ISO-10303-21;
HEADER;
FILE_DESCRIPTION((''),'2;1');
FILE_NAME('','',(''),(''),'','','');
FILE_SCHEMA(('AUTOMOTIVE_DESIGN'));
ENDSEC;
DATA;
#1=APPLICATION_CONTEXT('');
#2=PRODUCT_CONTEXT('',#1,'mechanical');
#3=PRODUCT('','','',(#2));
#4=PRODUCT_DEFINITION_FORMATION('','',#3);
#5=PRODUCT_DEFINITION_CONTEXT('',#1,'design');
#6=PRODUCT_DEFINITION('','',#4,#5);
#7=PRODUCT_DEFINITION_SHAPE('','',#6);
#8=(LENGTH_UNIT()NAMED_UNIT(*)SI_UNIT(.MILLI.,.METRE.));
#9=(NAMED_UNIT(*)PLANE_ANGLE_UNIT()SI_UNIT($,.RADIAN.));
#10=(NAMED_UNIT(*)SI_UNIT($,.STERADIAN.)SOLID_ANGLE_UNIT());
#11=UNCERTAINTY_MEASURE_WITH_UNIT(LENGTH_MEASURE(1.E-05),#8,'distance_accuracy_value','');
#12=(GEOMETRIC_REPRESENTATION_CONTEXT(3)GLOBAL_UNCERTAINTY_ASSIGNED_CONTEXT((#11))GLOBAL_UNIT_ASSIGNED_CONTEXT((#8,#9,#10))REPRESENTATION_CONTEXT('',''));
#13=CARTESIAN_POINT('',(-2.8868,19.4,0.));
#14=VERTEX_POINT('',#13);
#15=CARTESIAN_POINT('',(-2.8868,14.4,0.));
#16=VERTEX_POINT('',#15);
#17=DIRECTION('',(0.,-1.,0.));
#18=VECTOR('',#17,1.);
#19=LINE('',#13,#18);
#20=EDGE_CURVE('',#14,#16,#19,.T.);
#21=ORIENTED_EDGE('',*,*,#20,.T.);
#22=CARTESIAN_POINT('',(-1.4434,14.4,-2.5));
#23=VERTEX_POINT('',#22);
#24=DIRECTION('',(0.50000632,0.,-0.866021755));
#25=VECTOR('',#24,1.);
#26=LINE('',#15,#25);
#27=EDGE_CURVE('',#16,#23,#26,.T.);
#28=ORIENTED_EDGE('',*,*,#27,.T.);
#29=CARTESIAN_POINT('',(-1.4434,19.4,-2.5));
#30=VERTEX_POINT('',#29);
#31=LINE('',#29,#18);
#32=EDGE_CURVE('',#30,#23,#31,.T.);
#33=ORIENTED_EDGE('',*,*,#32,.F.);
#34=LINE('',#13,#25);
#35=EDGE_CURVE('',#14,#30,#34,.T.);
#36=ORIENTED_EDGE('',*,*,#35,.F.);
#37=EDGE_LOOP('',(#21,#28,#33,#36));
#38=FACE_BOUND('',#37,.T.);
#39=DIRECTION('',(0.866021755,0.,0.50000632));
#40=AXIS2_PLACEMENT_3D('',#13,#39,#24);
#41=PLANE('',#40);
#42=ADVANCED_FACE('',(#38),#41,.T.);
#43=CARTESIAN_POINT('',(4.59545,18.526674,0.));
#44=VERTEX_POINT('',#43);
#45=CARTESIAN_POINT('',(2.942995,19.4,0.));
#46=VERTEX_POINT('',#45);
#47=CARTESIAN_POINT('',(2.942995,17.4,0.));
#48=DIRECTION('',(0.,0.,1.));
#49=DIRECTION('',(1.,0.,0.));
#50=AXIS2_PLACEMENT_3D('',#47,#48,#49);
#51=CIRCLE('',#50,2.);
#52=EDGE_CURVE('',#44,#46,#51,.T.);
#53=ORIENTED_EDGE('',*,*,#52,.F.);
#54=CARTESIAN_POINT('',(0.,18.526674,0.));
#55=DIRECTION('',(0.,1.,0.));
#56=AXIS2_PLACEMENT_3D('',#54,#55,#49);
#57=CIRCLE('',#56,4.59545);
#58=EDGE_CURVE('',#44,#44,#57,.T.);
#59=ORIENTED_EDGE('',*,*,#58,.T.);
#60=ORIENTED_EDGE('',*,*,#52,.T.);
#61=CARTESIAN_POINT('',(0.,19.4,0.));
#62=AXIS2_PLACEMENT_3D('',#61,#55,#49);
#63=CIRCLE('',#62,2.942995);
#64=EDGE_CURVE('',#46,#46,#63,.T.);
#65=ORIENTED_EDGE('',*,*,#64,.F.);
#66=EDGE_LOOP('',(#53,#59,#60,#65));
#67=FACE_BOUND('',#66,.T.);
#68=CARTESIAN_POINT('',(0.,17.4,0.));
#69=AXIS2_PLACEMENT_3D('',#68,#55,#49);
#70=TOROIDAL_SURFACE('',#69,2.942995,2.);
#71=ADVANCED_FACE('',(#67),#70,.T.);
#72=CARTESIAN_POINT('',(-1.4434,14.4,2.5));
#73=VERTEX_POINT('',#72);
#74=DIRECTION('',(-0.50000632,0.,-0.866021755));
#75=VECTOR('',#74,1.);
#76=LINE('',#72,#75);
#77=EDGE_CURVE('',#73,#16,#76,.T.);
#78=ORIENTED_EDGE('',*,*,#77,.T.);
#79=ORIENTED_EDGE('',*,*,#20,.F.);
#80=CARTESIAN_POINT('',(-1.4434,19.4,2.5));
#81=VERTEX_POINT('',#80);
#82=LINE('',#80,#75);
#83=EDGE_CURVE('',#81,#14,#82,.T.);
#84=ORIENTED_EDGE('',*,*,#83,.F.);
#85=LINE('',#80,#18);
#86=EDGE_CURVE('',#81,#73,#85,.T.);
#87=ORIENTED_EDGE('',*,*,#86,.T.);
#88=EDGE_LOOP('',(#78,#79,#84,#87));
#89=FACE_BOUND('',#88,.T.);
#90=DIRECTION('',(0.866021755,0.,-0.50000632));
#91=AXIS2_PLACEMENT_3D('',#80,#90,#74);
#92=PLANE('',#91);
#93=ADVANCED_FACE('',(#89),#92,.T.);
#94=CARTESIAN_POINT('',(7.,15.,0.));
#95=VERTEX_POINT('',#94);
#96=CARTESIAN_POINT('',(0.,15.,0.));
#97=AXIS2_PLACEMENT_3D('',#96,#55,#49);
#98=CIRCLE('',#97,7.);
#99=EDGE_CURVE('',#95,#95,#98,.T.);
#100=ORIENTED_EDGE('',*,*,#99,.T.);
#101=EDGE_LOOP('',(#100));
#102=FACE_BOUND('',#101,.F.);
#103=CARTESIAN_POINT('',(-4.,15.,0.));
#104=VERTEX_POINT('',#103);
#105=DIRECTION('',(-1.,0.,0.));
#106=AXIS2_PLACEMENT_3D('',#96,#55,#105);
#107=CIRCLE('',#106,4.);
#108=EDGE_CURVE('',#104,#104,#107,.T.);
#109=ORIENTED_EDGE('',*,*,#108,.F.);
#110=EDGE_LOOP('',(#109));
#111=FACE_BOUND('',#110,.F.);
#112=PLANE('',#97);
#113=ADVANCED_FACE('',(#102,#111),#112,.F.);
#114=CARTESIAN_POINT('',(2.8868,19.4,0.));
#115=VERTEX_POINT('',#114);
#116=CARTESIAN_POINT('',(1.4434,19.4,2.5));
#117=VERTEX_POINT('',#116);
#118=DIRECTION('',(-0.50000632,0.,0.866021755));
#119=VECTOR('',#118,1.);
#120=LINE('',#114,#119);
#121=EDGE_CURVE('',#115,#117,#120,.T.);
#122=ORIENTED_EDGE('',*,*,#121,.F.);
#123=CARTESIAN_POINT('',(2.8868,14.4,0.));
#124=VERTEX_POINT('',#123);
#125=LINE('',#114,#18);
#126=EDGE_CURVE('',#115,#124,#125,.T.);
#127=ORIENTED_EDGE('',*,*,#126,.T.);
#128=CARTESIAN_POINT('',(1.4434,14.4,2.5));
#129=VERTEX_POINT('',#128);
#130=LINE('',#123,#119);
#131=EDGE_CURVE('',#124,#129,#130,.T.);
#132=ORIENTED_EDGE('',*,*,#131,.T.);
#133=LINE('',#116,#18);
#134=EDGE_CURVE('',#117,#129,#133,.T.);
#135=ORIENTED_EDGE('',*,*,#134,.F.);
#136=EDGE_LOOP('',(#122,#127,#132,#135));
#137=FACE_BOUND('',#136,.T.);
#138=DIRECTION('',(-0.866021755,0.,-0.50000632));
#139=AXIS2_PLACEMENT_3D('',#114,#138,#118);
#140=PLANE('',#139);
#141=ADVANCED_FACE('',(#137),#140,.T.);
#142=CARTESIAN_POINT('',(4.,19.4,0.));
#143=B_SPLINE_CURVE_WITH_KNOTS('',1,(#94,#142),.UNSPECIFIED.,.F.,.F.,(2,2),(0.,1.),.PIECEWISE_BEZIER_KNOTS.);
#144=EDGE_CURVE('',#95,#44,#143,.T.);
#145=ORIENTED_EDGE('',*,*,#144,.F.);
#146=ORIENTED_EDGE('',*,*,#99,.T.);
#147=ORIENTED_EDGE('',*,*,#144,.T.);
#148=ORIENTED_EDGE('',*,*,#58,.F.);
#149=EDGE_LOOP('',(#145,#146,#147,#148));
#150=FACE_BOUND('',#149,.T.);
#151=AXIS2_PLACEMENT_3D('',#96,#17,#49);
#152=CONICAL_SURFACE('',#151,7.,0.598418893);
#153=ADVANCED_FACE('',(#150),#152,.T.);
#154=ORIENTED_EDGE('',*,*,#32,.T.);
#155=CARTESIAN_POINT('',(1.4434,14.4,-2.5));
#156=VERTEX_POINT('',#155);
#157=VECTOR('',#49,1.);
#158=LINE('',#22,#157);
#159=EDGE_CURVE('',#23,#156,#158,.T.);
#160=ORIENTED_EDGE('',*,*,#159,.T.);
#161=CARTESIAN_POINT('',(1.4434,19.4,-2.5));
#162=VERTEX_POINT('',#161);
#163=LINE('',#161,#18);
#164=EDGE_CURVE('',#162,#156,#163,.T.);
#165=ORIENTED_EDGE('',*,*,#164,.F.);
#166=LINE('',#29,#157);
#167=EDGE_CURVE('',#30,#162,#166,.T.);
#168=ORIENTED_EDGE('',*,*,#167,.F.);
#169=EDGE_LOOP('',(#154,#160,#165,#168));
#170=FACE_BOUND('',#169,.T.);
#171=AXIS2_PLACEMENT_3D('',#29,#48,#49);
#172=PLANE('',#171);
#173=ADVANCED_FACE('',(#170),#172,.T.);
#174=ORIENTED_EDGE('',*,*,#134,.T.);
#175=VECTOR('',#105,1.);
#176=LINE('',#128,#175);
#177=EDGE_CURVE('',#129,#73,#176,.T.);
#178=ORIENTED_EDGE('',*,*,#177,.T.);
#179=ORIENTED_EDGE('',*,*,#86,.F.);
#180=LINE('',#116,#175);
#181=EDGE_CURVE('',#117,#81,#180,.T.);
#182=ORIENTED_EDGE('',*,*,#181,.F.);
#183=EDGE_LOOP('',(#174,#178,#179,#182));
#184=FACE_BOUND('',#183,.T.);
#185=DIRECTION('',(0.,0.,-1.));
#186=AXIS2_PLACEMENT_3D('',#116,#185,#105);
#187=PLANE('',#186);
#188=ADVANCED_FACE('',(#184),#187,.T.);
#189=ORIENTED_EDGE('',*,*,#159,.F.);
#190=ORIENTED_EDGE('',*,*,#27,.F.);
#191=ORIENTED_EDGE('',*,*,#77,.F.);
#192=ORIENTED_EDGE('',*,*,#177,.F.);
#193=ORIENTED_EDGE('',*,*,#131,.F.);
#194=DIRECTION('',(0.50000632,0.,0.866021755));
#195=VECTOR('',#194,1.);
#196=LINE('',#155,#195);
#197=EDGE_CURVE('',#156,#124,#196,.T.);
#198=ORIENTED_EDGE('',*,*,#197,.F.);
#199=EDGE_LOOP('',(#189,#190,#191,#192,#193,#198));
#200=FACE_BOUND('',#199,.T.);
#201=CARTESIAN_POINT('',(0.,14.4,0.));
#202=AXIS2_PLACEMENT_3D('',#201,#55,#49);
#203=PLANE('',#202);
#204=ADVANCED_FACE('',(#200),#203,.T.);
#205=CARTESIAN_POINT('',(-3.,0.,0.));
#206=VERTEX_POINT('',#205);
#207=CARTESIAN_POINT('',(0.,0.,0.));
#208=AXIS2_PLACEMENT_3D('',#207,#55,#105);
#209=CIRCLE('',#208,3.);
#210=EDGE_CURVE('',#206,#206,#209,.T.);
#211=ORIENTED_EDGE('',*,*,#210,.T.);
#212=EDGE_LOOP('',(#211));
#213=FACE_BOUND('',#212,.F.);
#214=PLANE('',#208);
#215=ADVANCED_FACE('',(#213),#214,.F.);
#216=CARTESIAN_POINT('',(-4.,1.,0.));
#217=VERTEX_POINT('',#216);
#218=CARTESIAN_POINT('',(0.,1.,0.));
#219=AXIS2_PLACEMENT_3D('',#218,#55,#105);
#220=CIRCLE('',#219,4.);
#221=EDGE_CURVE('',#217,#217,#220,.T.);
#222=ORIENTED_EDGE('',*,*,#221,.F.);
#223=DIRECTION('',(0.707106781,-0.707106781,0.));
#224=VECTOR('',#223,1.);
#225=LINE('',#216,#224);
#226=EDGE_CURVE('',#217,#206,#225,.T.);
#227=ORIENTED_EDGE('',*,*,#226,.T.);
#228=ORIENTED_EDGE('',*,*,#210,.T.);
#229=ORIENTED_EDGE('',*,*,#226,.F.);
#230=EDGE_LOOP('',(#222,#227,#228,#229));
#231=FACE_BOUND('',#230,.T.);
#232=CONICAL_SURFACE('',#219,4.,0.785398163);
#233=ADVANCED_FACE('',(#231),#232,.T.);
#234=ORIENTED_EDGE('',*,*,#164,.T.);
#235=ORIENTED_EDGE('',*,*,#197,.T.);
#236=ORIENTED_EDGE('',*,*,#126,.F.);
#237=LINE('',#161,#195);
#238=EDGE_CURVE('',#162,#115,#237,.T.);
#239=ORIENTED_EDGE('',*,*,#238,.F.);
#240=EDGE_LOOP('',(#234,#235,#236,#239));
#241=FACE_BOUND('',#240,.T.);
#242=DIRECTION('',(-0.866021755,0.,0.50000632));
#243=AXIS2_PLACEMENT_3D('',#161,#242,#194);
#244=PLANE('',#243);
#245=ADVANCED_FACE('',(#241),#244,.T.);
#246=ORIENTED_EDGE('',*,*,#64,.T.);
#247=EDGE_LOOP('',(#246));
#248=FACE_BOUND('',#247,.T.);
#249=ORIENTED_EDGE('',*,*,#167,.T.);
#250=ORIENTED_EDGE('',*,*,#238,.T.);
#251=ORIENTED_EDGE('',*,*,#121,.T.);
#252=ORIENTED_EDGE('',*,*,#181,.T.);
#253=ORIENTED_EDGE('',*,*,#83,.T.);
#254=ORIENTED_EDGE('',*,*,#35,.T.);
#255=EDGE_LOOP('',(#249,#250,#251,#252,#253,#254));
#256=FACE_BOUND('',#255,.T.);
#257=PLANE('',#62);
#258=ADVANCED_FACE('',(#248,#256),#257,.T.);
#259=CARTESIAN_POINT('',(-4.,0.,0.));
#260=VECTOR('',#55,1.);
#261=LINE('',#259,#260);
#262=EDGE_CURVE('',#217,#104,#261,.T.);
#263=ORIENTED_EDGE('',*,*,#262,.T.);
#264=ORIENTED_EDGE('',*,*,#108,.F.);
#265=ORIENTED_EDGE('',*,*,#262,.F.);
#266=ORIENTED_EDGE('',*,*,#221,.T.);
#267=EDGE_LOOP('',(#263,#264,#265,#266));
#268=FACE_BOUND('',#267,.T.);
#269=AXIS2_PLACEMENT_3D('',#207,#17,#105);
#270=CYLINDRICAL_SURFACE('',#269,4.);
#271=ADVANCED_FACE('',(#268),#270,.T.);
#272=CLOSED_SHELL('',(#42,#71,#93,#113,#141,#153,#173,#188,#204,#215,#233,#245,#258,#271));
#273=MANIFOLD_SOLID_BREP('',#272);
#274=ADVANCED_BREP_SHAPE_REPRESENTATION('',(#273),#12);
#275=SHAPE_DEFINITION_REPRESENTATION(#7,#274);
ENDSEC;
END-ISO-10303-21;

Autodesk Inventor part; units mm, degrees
ref_plane "YZ Plane" through (0, 0, 0) normal (1, 0, 0) x (0, 1, 0)
ref_plane "XZ Plane" through (0, 0, 0) normal (0, 1, 0) x (-1, 0, 0)
sketch "Sketch1" plane through (0, 0, 0) normal (0, 1, 0) x (-1, 0, 0)
  circle A0 centre (0, 0) radius 4
  dimension "d0" = 8
extrude "Extrusion1" add sketch "Sketch1" along normal blind 15
chamfer "Chamfer1" distance 1 angle 45 1 edges at (4, 0, 0)
ref_plane "Work Plane1" through (0, 19.4, 0) normal (0, 1, 0) x (1, 0, 0)
thread "Thread1" size "M8x1.25" class "6g" standard "ANSI Metric M Profile" full length
sketch "Sketch5" plane through (0, 15, 0) normal (0, 1, 0) x (1, 0, 0)
  circle A0 centre (0, 0) radius 7
  dimension "d17" = 14
sketch "Sketch6" plane through (0, 19.4, 0) normal (0, 1, 0) x (1, 0, 0)
  circle A0 centre (0, 0) radius 4
  dimension "d18" = 8
loft "Loft2" add profiles "Sketch5", "Sketch6"
fillet "Fillet1" radius 2 1 edges at (-4, 19.4, 0)
sketch "Sketch7" plane through (0, 19.4, 0) normal (0, 1, 0) x (1, 0, 0)
  line L0 (2.8868, 0) -> (1.4434, -2.5)
  line L1 (1.4434, -2.5) -> (-1.4434, -2.5)
  line L2 (-1.4434, -2.5) -> (-2.8868, 0)
  line L3 (-2.8868, 0) -> (-1.4434, 2.5)
  line L4 (-1.4434, 2.5) -> (1.4434, 2.5)
  line L5 (1.4434, 2.5) -> (2.8868, 0)
  point P0 (0, 0)
  point P1 (0, 0)
  dimension "d24" = 5
extrude "Extrusion3" cut sketch "Sketch7" against normal blind 5
properties part number "M8x15"
